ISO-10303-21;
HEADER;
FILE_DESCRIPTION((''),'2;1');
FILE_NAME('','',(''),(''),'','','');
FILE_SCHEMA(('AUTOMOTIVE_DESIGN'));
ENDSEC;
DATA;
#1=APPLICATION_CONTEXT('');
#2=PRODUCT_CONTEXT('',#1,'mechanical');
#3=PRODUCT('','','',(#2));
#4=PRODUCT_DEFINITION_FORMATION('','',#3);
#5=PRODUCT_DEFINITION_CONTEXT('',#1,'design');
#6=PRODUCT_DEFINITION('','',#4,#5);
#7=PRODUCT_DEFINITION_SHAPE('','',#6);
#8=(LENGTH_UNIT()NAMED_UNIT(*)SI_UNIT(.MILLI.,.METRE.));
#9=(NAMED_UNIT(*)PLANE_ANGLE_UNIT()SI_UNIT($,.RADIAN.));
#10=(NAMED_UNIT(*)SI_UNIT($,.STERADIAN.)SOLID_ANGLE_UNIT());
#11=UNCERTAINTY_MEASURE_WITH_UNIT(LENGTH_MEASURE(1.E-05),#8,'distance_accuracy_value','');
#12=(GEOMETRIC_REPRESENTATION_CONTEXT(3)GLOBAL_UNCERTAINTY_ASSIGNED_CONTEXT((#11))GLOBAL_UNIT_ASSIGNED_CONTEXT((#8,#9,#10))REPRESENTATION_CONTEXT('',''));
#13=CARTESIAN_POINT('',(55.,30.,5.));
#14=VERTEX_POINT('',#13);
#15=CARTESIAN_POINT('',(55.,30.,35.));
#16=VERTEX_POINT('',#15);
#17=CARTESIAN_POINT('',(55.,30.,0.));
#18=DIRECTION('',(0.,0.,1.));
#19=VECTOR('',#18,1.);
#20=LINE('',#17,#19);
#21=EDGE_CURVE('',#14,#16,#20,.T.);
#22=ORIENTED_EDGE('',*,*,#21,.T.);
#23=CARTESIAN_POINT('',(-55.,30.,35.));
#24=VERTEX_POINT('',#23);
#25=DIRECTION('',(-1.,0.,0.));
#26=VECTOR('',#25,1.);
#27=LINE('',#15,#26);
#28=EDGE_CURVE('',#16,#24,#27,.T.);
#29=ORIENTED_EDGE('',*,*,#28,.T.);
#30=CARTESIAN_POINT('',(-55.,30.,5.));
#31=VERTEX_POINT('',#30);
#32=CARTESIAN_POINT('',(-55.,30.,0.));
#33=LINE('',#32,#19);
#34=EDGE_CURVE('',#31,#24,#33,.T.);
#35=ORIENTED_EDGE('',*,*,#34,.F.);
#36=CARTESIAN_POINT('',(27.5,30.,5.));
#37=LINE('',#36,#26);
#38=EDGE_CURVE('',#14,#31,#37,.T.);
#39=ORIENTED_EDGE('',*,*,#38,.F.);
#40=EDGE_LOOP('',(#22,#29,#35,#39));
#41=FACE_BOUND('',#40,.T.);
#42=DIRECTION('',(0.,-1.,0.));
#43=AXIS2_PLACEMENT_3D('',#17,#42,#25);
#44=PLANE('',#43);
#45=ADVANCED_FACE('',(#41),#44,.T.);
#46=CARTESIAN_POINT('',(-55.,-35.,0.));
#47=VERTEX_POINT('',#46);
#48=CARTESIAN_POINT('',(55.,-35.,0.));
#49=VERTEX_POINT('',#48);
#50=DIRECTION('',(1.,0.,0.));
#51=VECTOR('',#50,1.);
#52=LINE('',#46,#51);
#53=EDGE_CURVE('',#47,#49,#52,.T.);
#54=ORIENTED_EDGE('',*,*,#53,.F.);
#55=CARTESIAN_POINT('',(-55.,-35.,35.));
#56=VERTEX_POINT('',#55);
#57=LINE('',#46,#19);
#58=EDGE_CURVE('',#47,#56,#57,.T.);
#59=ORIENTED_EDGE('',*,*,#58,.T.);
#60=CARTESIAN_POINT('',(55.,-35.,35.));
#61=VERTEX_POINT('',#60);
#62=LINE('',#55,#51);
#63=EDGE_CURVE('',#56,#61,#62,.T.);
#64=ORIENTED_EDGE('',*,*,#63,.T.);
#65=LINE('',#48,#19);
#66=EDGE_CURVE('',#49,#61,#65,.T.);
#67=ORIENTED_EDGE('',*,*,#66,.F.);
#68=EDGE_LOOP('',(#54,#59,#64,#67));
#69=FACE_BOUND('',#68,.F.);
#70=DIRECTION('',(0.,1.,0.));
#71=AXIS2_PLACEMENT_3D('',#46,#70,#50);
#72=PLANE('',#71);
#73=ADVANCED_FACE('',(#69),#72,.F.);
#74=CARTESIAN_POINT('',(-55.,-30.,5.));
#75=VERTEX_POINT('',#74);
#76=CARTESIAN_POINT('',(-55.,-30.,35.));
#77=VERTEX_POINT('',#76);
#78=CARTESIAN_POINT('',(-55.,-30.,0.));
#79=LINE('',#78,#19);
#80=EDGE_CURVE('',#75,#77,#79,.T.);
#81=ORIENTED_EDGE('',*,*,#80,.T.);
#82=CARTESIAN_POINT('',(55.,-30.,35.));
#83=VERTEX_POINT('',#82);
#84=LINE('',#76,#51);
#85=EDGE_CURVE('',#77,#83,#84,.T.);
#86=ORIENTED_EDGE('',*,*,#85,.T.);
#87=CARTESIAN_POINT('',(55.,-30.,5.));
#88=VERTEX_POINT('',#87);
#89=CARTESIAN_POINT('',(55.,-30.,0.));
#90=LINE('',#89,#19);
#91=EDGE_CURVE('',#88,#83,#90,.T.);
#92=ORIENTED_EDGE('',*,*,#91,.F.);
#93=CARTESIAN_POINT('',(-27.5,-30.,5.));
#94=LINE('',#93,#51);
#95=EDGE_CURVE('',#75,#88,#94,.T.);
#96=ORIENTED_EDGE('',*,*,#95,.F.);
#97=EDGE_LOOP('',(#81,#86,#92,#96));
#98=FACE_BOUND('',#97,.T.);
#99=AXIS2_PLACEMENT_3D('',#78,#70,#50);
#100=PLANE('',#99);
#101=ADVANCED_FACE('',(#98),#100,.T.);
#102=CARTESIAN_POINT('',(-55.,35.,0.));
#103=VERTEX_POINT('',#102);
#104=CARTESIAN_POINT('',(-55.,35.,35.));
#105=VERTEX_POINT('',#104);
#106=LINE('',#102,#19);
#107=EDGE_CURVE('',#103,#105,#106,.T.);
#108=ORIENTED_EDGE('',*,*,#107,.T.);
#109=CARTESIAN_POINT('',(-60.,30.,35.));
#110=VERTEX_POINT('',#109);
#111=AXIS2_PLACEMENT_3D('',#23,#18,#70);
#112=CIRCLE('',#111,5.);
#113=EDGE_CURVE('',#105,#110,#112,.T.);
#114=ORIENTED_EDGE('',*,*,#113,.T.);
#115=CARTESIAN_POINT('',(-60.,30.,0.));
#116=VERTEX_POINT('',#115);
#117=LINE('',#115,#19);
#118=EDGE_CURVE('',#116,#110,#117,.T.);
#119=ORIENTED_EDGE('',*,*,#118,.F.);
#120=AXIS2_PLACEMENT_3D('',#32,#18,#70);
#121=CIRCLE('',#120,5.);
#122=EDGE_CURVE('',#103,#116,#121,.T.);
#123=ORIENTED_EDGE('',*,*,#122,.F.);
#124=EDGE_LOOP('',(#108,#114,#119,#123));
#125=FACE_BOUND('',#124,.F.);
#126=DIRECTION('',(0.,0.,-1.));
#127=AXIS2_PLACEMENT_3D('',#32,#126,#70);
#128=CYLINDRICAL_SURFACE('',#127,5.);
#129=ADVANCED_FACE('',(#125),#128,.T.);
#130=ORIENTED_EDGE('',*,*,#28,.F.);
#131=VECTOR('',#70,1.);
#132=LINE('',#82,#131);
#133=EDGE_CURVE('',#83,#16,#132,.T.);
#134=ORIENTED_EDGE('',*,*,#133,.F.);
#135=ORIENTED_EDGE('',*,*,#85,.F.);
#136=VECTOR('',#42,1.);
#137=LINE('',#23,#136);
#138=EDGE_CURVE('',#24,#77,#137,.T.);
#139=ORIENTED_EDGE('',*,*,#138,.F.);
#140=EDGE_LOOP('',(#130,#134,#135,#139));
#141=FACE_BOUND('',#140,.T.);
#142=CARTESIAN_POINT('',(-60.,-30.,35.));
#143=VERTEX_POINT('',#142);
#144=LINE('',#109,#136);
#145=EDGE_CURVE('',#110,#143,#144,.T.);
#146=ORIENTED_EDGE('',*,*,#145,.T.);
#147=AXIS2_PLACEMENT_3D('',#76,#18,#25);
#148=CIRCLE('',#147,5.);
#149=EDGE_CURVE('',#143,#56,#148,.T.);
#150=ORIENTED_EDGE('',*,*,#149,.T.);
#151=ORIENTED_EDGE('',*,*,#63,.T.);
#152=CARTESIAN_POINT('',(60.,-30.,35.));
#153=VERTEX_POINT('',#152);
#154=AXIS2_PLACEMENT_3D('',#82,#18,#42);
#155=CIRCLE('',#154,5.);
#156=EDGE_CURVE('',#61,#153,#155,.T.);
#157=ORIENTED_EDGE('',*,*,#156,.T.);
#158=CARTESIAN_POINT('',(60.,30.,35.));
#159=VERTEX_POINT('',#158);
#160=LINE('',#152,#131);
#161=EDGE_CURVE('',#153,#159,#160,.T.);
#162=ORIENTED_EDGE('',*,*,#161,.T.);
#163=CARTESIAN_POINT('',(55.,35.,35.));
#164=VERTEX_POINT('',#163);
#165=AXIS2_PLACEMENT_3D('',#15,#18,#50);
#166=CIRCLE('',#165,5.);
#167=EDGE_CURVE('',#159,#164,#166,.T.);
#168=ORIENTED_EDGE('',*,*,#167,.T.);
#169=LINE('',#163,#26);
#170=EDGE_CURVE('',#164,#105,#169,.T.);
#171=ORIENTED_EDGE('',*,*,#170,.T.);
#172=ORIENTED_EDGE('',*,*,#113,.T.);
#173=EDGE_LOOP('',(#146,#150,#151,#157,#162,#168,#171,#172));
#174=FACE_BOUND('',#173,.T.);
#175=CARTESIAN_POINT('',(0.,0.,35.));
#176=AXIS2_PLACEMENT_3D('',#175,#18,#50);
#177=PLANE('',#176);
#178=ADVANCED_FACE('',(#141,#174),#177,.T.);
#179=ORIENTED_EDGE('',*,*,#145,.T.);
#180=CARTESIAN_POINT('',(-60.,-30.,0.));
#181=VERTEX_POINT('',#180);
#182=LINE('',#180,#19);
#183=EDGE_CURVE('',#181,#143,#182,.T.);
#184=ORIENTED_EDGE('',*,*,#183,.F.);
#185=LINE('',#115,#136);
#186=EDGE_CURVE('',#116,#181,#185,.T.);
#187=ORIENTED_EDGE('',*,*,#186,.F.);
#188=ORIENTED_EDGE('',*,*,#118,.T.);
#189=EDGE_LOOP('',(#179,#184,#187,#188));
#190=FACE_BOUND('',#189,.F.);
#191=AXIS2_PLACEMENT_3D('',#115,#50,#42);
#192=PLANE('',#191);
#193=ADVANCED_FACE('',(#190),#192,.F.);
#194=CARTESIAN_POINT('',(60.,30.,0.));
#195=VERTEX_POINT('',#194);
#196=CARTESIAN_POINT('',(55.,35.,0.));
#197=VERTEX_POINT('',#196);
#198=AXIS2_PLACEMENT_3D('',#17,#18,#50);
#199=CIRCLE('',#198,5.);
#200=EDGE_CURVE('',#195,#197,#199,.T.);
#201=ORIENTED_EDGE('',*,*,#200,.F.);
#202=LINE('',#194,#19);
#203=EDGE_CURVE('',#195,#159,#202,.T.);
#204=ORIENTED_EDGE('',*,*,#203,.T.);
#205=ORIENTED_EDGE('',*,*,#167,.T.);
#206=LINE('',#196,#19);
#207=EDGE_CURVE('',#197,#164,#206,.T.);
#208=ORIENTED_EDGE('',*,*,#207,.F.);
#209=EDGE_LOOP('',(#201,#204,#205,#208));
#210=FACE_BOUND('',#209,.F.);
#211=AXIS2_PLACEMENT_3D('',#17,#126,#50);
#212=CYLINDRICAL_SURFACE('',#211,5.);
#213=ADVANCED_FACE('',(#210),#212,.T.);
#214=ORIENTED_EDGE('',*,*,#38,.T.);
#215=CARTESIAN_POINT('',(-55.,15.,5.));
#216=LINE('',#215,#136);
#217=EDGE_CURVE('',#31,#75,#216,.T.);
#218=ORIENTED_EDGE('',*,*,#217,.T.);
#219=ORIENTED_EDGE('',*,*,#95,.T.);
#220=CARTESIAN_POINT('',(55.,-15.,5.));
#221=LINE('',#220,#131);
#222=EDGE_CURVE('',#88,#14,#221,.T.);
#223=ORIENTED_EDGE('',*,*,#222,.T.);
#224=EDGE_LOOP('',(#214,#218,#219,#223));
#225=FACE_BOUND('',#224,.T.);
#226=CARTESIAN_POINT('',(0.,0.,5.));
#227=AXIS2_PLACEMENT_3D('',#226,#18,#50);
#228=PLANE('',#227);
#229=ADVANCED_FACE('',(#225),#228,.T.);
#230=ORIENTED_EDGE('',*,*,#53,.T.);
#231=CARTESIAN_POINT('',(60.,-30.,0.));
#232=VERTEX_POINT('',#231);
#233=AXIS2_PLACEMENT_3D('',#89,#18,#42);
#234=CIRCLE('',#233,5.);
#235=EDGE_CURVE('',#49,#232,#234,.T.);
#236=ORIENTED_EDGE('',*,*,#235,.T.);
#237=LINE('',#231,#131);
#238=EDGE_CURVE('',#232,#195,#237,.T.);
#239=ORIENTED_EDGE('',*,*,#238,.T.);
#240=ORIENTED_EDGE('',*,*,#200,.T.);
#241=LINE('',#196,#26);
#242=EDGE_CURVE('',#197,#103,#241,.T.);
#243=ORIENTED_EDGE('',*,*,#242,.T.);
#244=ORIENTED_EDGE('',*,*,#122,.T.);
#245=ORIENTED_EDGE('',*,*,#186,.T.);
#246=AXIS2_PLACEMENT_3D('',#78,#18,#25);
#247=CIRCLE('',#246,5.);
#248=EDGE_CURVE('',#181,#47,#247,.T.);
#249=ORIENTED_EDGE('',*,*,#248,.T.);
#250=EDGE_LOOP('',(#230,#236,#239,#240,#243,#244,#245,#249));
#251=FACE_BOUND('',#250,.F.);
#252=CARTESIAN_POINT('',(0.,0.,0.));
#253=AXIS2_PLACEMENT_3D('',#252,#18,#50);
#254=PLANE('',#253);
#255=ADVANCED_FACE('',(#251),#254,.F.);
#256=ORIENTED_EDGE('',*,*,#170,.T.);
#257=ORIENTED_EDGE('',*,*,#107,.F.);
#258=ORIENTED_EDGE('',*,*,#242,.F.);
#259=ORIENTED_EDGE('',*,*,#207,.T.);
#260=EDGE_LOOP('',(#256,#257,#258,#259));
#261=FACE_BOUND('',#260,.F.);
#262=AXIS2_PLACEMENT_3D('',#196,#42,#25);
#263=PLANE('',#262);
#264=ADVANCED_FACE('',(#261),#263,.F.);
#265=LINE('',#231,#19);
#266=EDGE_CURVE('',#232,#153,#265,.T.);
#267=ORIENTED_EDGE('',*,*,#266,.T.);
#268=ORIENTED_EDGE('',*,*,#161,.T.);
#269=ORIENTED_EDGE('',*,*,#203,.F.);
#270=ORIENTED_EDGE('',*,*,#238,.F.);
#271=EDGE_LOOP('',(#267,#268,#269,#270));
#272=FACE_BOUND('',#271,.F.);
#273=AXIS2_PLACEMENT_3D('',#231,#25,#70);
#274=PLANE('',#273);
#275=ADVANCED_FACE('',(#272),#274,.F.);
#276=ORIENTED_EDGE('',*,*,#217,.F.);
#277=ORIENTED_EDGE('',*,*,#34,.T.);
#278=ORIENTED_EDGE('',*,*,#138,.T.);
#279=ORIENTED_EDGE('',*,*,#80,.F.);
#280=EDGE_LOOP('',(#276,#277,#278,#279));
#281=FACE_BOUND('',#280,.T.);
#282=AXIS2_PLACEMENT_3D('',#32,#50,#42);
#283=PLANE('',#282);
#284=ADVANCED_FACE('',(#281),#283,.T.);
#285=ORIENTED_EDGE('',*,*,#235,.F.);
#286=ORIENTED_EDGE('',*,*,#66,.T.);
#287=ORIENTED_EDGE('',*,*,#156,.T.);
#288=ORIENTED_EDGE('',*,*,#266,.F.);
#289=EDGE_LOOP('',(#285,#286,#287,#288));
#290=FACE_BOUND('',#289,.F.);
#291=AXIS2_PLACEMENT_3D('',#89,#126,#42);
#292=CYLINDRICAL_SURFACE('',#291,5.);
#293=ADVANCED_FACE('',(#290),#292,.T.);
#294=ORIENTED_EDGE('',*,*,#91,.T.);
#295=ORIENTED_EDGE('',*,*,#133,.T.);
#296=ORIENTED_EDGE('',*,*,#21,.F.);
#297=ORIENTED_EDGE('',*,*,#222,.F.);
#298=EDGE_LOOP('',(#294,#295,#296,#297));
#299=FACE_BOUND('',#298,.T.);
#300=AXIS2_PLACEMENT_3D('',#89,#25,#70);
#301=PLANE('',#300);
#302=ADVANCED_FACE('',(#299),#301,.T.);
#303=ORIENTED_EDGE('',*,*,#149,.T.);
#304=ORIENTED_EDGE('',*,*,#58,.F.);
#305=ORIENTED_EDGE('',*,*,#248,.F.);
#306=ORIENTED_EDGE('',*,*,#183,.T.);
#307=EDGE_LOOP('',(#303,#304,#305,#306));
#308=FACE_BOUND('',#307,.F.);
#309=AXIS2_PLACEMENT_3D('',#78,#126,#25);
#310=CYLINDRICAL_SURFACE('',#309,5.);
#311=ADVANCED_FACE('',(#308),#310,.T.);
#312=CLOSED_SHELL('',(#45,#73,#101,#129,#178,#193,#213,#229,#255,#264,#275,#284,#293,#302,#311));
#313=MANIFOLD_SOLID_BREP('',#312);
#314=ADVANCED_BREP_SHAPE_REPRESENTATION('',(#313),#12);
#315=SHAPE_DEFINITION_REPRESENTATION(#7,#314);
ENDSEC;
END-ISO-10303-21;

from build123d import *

# Parameters (mm, degrees)
F1_DEPTH = 35
F2_T     = 5


# Not quite as in the source:
# - a shell that OpenCascade refuses in one call is made with other operations: the cavity is built on its own and cut out


with BuildPart() as f1:
    # F0 (on Top) → F1 (new body)
    with BuildSketch(Plane.XY):
        with BuildLine():
            Line((55, 35), (-55, 35))
            ThreePointArc((-55, 35), (-58.5355339059, 33.5355339059), (-60, 30))
            Line((-60, 30), (-60, -30))
            ThreePointArc((-60, -30), (-58.5355339059, -33.5355339059), (-55, -35))
            Line((-55, -35), (55, -35))
            ThreePointArc((55, -35), (58.5355339059, -33.5355339059), (60, -30))
            Line((60, -30), (60, 30))
            ThreePointArc((60, 30), (58.5355339059, 33.5355339059), (55, 35))
        make_face()
    extrude(amount=F1_DEPTH)

    # F2: shell of thickness 5, made by hand


with BuildPart() as f2_core1:
    # F2_t2: copy of F1
    add(f1.part)

    # the walls: a layer under each face that stays
    f2_faces = [f2_core1.faces().sort_by_distance(p)[0] for p in [
        (0, 35, 17.5),
        (-60, 0, 17.5),
        (0, -35, 17.5),
        (60, 0, 17.5),
        (0, 0, 0),
    ]]
    thicken(f2_faces, amount=-F2_T, mode=Mode.SUBTRACT)


with BuildPart() as f1_1:
    add(f1.part)

    # what is left inside the walls is the cavity
    f2_cavity = [f2_core1.part.solids().sort_by_distance(p)[0] for p in [
        (0, -10, 5.05),
    ]]
    add(f2_cavity, mode=Mode.SUBTRACT)


solid = f1_1.part
